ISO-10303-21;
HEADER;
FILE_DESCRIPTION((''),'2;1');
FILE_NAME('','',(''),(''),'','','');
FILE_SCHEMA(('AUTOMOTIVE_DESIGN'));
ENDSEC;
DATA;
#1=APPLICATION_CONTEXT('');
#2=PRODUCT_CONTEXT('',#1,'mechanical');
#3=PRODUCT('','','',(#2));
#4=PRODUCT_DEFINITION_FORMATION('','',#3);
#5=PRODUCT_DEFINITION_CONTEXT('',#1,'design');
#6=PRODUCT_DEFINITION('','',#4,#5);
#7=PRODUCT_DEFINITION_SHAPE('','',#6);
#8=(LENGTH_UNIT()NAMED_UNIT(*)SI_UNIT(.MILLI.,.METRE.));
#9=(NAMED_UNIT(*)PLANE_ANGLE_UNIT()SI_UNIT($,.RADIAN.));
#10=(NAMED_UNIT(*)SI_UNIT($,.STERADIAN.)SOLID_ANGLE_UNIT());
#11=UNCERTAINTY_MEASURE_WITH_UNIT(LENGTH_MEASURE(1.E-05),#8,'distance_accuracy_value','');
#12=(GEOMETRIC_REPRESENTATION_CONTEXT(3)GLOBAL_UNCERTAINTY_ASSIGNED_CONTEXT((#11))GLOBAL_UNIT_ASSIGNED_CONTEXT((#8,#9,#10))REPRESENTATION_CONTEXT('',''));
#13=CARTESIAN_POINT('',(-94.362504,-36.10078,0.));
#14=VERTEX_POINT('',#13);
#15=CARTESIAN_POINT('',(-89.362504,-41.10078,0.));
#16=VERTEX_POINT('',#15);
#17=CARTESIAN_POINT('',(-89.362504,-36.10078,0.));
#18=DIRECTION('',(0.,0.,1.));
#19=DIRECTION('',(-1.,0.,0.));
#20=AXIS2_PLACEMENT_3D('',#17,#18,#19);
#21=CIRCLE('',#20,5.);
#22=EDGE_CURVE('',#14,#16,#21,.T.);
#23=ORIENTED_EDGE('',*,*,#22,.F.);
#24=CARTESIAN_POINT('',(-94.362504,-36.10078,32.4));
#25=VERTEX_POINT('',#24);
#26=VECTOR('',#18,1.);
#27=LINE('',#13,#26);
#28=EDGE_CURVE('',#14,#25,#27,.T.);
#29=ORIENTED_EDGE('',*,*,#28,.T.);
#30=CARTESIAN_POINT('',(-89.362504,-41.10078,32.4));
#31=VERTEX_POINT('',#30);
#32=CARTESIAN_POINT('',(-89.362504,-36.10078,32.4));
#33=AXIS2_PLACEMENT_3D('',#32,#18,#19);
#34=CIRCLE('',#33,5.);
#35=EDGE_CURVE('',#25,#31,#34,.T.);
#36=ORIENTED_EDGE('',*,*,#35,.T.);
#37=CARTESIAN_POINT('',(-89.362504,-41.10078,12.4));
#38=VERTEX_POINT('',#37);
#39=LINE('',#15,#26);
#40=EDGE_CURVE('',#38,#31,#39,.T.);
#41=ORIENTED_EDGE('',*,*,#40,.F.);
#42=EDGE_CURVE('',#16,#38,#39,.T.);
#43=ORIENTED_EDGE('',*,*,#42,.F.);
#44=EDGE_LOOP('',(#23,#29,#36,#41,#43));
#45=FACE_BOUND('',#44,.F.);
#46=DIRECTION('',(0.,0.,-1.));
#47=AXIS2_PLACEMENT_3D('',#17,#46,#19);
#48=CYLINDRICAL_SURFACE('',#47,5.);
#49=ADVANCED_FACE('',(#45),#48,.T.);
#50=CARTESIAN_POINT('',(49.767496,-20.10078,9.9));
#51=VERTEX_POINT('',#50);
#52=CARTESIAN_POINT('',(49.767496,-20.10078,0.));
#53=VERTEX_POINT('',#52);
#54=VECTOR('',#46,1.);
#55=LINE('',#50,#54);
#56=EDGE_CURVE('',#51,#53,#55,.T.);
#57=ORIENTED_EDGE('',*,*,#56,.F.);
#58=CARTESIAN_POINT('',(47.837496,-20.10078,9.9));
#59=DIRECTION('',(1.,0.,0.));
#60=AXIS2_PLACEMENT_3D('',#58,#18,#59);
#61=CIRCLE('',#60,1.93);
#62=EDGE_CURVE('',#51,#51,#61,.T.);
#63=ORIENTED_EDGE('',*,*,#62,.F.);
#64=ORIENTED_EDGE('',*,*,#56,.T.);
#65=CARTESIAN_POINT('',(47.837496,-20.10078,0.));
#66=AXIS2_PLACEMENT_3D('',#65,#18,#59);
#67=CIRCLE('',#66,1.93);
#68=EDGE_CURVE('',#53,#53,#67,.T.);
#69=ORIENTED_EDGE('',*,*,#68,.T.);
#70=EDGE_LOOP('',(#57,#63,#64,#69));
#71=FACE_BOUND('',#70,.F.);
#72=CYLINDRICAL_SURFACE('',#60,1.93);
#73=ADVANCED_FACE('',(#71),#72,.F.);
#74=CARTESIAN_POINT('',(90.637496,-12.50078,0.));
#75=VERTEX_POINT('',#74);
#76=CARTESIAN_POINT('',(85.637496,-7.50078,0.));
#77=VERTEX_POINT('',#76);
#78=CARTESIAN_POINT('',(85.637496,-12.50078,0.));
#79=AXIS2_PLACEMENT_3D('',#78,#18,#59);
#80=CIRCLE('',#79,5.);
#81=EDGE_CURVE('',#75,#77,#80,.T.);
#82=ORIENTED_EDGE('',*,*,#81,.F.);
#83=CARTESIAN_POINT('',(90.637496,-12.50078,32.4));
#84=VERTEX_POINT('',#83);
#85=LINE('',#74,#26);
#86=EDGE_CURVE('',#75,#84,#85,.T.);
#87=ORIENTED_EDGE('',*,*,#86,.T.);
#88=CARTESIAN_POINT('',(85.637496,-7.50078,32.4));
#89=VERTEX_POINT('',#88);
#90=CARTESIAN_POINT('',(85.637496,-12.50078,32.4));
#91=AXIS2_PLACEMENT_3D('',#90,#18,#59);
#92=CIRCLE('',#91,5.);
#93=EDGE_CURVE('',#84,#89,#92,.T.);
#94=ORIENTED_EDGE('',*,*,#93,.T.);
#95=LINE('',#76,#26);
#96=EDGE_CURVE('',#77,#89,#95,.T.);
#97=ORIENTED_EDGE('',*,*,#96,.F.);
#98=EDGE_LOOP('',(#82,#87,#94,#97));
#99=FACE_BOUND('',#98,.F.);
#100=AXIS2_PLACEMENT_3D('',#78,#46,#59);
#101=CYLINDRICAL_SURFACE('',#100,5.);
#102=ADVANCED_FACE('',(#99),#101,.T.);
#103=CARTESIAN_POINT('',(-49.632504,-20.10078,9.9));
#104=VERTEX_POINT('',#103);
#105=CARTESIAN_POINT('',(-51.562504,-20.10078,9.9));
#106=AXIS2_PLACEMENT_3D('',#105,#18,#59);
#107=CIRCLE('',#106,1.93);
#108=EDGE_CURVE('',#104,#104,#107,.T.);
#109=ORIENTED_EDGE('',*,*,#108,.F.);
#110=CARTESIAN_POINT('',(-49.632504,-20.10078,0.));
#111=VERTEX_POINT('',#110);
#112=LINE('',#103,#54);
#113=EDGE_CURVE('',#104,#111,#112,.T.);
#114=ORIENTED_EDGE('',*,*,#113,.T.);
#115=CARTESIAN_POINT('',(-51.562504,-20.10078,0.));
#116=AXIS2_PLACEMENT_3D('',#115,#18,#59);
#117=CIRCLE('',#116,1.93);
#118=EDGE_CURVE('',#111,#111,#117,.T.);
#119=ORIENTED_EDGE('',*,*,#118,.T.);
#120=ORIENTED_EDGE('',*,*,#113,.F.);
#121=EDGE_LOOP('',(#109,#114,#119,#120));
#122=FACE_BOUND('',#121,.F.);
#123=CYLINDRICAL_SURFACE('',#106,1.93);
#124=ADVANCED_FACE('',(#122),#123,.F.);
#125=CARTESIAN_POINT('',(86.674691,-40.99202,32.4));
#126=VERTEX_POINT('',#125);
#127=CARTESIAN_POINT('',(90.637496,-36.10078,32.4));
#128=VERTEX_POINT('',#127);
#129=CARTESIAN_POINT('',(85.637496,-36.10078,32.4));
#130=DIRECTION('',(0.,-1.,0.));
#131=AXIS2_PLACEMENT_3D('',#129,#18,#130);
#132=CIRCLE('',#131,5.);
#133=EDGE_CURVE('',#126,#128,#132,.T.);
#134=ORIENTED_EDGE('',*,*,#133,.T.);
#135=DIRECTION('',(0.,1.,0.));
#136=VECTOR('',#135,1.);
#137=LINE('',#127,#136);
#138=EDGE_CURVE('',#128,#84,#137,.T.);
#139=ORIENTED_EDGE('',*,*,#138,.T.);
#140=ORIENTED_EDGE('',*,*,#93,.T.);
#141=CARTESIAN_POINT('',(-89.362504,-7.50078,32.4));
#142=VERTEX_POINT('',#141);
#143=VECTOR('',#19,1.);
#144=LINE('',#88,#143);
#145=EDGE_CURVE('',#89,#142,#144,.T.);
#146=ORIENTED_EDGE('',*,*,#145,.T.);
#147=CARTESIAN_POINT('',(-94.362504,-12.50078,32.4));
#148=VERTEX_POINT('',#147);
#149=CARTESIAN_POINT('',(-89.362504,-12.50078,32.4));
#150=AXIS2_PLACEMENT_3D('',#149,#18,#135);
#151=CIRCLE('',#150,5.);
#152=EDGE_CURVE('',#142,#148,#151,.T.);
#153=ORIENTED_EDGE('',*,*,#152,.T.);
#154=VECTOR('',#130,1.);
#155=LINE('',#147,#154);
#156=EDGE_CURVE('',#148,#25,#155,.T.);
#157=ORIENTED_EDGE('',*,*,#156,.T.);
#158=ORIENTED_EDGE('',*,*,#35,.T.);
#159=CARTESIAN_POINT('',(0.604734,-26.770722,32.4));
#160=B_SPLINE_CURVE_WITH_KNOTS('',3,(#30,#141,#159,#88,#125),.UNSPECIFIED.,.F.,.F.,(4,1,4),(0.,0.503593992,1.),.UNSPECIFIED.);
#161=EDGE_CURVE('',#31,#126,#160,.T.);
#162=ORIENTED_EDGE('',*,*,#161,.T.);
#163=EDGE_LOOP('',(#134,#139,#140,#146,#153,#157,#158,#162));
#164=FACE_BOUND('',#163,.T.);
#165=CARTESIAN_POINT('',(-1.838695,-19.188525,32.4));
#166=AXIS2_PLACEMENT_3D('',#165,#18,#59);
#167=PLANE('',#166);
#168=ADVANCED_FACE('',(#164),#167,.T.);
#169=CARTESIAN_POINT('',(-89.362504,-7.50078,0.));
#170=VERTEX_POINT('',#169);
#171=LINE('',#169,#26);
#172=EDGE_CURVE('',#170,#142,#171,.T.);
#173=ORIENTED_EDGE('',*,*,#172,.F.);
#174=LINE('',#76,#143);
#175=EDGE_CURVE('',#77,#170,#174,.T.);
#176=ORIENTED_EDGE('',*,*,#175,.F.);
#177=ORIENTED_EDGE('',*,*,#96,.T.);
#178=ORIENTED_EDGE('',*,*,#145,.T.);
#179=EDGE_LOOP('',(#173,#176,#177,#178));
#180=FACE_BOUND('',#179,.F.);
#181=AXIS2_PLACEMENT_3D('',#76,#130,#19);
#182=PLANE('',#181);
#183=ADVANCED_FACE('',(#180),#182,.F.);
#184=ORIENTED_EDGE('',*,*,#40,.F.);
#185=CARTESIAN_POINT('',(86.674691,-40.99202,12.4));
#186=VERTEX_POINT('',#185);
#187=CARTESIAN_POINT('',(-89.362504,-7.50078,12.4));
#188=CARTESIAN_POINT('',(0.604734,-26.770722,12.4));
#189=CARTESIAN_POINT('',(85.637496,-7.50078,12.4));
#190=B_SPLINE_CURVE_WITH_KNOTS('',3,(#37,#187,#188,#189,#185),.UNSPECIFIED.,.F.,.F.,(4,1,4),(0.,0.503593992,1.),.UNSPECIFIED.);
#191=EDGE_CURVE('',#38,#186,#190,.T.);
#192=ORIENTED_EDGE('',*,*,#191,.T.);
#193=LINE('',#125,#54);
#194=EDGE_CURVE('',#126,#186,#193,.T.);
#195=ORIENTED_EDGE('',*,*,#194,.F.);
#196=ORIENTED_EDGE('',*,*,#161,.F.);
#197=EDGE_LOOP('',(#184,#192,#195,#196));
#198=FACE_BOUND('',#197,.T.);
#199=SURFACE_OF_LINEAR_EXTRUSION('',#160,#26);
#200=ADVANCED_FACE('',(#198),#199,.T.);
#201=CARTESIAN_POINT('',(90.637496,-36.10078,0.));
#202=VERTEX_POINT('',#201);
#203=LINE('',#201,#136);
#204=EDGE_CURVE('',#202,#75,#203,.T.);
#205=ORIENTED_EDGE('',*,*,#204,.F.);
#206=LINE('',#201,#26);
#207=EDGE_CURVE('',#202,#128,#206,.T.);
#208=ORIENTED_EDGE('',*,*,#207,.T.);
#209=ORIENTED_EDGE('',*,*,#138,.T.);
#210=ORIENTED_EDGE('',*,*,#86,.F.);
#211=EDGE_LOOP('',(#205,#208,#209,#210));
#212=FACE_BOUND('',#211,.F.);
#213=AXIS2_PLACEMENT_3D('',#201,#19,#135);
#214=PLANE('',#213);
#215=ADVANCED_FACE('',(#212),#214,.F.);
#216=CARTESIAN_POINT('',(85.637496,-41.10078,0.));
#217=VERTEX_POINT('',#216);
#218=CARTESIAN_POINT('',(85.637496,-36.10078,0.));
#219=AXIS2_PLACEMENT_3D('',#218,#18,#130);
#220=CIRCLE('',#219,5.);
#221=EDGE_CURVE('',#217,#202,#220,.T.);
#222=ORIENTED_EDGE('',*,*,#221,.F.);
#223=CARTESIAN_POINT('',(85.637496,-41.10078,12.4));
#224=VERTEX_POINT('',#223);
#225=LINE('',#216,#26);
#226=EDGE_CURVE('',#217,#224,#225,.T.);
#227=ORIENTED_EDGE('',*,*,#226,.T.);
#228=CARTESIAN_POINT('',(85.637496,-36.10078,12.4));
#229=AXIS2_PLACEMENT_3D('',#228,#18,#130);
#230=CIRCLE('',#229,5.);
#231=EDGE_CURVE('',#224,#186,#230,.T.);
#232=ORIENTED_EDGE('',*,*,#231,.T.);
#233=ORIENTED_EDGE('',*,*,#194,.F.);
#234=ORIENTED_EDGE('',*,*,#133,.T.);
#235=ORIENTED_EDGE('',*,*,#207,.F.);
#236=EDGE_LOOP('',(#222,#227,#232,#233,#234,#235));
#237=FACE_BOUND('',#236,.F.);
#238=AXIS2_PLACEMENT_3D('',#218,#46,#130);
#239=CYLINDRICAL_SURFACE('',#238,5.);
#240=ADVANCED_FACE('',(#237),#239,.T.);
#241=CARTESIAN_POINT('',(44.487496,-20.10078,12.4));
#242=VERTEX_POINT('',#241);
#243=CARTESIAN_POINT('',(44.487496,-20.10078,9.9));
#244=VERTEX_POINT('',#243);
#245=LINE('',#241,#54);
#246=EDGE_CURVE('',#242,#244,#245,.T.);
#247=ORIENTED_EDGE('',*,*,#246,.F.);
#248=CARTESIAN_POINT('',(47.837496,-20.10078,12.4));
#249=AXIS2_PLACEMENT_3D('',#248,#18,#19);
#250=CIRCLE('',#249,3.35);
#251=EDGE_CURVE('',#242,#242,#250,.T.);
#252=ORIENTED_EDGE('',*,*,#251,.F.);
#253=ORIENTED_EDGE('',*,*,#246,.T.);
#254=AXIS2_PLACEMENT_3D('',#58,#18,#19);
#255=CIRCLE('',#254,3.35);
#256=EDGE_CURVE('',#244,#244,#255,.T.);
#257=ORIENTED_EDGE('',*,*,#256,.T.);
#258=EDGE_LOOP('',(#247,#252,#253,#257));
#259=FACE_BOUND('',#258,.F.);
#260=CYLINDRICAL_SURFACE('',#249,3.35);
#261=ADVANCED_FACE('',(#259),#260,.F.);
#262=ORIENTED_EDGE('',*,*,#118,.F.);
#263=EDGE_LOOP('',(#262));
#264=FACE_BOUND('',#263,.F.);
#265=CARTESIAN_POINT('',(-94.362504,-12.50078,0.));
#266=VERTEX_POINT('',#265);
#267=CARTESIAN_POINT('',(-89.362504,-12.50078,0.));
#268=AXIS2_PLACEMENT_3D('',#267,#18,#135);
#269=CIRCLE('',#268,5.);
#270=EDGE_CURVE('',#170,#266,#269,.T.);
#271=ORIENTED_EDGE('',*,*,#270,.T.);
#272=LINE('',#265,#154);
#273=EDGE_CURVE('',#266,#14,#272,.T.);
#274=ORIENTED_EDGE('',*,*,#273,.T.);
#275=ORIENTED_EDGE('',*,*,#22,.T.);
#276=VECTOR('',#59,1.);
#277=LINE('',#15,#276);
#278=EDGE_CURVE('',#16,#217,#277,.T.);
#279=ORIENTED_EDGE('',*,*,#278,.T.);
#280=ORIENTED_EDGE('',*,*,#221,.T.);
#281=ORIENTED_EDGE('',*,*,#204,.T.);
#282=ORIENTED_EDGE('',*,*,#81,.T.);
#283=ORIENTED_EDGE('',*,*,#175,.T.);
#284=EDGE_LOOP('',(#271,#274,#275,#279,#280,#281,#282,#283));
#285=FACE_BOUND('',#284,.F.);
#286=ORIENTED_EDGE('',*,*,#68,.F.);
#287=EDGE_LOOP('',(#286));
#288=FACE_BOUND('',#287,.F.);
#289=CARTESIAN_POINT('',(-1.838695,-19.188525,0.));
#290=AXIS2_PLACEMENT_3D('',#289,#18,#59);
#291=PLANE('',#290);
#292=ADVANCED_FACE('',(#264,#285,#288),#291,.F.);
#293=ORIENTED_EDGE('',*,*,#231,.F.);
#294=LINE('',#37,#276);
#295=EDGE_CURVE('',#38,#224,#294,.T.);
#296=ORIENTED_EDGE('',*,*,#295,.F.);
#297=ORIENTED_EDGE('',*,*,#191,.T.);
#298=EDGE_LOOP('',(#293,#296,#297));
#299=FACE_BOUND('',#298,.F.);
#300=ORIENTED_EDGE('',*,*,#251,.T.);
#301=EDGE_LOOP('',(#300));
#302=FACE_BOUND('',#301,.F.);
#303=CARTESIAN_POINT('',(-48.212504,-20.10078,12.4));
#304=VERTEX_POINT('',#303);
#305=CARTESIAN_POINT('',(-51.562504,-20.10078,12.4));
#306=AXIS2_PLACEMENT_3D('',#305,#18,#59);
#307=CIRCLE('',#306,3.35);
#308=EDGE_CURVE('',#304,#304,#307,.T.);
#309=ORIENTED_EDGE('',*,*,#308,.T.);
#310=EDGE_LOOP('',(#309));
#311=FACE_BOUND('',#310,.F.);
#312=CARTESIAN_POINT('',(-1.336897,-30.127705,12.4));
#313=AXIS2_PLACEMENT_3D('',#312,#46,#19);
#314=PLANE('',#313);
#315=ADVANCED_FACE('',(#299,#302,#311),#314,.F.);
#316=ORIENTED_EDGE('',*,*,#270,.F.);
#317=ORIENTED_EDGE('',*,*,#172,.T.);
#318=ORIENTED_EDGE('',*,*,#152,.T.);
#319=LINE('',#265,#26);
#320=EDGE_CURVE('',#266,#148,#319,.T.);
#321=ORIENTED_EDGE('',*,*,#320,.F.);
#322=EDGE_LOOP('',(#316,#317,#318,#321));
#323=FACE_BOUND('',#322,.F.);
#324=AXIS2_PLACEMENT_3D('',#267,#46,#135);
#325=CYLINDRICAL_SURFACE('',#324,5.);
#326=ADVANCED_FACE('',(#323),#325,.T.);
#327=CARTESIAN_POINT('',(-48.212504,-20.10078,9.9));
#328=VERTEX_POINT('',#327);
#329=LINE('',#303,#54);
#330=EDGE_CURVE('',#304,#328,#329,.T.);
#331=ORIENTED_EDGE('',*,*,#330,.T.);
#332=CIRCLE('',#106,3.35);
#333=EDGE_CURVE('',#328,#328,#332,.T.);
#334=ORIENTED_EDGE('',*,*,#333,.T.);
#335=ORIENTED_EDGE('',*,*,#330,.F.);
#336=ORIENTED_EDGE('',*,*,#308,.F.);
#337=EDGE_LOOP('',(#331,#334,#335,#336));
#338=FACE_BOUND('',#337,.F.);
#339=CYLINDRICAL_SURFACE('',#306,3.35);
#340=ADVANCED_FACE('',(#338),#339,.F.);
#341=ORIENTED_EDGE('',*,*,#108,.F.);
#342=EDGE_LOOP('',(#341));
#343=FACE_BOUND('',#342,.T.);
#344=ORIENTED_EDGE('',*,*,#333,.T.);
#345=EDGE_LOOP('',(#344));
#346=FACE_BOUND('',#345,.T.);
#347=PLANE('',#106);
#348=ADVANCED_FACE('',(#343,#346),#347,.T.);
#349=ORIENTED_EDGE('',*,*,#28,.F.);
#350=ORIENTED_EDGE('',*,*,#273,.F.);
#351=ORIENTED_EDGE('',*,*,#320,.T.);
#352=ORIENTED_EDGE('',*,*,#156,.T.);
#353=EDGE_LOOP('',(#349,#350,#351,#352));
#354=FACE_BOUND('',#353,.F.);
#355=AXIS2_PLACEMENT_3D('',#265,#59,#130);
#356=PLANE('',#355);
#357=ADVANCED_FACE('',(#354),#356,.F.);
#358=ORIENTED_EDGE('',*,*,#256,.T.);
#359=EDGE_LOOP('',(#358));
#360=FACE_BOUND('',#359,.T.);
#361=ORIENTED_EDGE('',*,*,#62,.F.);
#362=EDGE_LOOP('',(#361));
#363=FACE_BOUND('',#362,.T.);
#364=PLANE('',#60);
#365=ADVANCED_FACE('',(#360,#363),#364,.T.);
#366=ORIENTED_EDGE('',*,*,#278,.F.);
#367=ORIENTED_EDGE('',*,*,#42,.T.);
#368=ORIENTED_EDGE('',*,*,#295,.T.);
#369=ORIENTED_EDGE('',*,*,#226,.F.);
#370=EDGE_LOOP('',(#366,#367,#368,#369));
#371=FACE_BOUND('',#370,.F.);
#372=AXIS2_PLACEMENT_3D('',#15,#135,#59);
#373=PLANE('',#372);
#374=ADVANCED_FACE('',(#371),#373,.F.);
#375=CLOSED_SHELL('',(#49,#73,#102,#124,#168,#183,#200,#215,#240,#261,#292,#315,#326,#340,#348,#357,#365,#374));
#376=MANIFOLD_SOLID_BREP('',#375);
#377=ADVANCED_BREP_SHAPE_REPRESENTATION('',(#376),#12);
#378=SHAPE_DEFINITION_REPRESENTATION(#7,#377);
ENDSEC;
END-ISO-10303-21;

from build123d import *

# Parameters (mm, degrees)
F1_DEPTH = 32.4
F3_DEPTH = 20
F4_R     = 3.35
F5_DEPTH = 2.5
F6_R     = 1.93
F7_DEPTH = 25
F8_R     = 1.93
F9_DEPTH = 25


# Not quite as in the source:
# - a feature names something its author has since deleted; it is built from what else it names


with BuildPart() as f1:
    # F0 (on Top) → F1 (new body)
    with BuildSketch(Plane.XY):
        with BuildLine():
            Line((85.6374964118, -7.5007802074), (-89.3625035882, -7.5007802074))
            ThreePointArc((-89.3625035882, -7.5007802074), (-92.8980374941, -8.9652463014), (-94.3625035882, -12.5007802074))
            Line((-94.3625035882, -12.5007802074), (-94.3625035882, -36.1007802074))
            ThreePointArc((-94.3625035882, -36.1007802074), (-92.8980374941, -39.6363141133), (-89.3625035882, -41.1007802074))
            add(Edge.make_bspline(
                [(-89.3625035882, -41.1007802074), (-59.4269413323, -34.6411043009), (-0.064704069, -1.5309018726), (57.2335608059, -34.7243234216), (85.6374964118, -41.1007802074)],
                knots=[0, 0, 0, 0, 0.5049781057, 1, 1, 1, 1], degree=3))
            ThreePointArc((85.6374964118, -41.1007802074), (89.1730303177, -39.6363141133), (90.6374964118, -36.1007802074))
            Line((90.6374964118, -36.1007802074), (90.6374964118, -12.5007802074))
            ThreePointArc((90.6374964118, -12.5007802074), (89.1730303177, -8.9652463014), (85.6374964118, -7.5007802074))
        make_face()
        with BuildLine():
            add(Edge.make_bspline(
                [(-89.3625035882, -41.1007802074), (-59.4269413323, -34.6411043009), (-0.064704069, -1.5309018726), (57.2335608059, -34.7243234216), (85.6374964118, -41.1007802074)],
                knots=[0, 0, 0, 0, 0.5049781057, 1, 1, 1, 1], degree=3))
            Line((-89.3625035882, -41.1007802074), (85.6374964118, -41.1007802074))
        make_face()
    extrude(amount=F1_DEPTH)

    # F2 (on face) → F3 (cut)
    with BuildSketch(Plane.XY.offset(32.4)):
        with BuildLine():
            add(Edge.make_bspline(
                [(-89.3625035882, -41.1007802074), (-89.3625035882, -7.5007802074), (0.6047339491, -26.7707217669), (85.6374964118, -7.5007802074), (86.6746914089, -40.9920199825)],
                knots=[0, 0, 0, 0, 0.5035939918, 1, 1, 1, 1], degree=3))
            Line((-89.3625035882, -41.1007802074), (85.6374964118, -41.1007802074))
            ThreePointArc((85.6374964118, -41.1007802074), (86.1589372638, -41.0735158165), (86.6746914089, -40.9920199825))
        make_face()
    extrude(amount=-F3_DEPTH, mode=Mode.SUBTRACT)

    # F4 (on face) → F5 (cut)
    with BuildSketch(Plane.XY.offset(12.4)):
        with Locations((-51.5625035882, -20.1007802074)):
            Circle(F4_R)
        with BuildLine():
            ThreePointArc((51.1874964118, -20.1007802074), (47.8374964118, -16.7507802074), (44.4874964118, -20.1007802074))
            ThreePointArc((44.4874964118, -20.1007802074), (47.8374964118, -23.4507802074), (51.1874964118, -20.1007802074))
        make_face()
    extrude(amount=-F5_DEPTH, mode=Mode.SUBTRACT)

    # F6 (on face) → F7 (cut)
    with BuildSketch(Plane.XY.offset(9.9)):
        with Locations((-51.5625035882, -20.1007802074)):
            Circle(F6_R)
    extrude(amount=-F7_DEPTH, mode=Mode.SUBTRACT)

    # F8 (on face) → F9 (cut)
    with BuildSketch(Plane.XY.offset(9.9)):
        with Locations((47.8374964118, -20.1007802074)):
            Circle(F8_R)
    extrude(amount=-F9_DEPTH, mode=Mode.SUBTRACT)


solid = f1.part
